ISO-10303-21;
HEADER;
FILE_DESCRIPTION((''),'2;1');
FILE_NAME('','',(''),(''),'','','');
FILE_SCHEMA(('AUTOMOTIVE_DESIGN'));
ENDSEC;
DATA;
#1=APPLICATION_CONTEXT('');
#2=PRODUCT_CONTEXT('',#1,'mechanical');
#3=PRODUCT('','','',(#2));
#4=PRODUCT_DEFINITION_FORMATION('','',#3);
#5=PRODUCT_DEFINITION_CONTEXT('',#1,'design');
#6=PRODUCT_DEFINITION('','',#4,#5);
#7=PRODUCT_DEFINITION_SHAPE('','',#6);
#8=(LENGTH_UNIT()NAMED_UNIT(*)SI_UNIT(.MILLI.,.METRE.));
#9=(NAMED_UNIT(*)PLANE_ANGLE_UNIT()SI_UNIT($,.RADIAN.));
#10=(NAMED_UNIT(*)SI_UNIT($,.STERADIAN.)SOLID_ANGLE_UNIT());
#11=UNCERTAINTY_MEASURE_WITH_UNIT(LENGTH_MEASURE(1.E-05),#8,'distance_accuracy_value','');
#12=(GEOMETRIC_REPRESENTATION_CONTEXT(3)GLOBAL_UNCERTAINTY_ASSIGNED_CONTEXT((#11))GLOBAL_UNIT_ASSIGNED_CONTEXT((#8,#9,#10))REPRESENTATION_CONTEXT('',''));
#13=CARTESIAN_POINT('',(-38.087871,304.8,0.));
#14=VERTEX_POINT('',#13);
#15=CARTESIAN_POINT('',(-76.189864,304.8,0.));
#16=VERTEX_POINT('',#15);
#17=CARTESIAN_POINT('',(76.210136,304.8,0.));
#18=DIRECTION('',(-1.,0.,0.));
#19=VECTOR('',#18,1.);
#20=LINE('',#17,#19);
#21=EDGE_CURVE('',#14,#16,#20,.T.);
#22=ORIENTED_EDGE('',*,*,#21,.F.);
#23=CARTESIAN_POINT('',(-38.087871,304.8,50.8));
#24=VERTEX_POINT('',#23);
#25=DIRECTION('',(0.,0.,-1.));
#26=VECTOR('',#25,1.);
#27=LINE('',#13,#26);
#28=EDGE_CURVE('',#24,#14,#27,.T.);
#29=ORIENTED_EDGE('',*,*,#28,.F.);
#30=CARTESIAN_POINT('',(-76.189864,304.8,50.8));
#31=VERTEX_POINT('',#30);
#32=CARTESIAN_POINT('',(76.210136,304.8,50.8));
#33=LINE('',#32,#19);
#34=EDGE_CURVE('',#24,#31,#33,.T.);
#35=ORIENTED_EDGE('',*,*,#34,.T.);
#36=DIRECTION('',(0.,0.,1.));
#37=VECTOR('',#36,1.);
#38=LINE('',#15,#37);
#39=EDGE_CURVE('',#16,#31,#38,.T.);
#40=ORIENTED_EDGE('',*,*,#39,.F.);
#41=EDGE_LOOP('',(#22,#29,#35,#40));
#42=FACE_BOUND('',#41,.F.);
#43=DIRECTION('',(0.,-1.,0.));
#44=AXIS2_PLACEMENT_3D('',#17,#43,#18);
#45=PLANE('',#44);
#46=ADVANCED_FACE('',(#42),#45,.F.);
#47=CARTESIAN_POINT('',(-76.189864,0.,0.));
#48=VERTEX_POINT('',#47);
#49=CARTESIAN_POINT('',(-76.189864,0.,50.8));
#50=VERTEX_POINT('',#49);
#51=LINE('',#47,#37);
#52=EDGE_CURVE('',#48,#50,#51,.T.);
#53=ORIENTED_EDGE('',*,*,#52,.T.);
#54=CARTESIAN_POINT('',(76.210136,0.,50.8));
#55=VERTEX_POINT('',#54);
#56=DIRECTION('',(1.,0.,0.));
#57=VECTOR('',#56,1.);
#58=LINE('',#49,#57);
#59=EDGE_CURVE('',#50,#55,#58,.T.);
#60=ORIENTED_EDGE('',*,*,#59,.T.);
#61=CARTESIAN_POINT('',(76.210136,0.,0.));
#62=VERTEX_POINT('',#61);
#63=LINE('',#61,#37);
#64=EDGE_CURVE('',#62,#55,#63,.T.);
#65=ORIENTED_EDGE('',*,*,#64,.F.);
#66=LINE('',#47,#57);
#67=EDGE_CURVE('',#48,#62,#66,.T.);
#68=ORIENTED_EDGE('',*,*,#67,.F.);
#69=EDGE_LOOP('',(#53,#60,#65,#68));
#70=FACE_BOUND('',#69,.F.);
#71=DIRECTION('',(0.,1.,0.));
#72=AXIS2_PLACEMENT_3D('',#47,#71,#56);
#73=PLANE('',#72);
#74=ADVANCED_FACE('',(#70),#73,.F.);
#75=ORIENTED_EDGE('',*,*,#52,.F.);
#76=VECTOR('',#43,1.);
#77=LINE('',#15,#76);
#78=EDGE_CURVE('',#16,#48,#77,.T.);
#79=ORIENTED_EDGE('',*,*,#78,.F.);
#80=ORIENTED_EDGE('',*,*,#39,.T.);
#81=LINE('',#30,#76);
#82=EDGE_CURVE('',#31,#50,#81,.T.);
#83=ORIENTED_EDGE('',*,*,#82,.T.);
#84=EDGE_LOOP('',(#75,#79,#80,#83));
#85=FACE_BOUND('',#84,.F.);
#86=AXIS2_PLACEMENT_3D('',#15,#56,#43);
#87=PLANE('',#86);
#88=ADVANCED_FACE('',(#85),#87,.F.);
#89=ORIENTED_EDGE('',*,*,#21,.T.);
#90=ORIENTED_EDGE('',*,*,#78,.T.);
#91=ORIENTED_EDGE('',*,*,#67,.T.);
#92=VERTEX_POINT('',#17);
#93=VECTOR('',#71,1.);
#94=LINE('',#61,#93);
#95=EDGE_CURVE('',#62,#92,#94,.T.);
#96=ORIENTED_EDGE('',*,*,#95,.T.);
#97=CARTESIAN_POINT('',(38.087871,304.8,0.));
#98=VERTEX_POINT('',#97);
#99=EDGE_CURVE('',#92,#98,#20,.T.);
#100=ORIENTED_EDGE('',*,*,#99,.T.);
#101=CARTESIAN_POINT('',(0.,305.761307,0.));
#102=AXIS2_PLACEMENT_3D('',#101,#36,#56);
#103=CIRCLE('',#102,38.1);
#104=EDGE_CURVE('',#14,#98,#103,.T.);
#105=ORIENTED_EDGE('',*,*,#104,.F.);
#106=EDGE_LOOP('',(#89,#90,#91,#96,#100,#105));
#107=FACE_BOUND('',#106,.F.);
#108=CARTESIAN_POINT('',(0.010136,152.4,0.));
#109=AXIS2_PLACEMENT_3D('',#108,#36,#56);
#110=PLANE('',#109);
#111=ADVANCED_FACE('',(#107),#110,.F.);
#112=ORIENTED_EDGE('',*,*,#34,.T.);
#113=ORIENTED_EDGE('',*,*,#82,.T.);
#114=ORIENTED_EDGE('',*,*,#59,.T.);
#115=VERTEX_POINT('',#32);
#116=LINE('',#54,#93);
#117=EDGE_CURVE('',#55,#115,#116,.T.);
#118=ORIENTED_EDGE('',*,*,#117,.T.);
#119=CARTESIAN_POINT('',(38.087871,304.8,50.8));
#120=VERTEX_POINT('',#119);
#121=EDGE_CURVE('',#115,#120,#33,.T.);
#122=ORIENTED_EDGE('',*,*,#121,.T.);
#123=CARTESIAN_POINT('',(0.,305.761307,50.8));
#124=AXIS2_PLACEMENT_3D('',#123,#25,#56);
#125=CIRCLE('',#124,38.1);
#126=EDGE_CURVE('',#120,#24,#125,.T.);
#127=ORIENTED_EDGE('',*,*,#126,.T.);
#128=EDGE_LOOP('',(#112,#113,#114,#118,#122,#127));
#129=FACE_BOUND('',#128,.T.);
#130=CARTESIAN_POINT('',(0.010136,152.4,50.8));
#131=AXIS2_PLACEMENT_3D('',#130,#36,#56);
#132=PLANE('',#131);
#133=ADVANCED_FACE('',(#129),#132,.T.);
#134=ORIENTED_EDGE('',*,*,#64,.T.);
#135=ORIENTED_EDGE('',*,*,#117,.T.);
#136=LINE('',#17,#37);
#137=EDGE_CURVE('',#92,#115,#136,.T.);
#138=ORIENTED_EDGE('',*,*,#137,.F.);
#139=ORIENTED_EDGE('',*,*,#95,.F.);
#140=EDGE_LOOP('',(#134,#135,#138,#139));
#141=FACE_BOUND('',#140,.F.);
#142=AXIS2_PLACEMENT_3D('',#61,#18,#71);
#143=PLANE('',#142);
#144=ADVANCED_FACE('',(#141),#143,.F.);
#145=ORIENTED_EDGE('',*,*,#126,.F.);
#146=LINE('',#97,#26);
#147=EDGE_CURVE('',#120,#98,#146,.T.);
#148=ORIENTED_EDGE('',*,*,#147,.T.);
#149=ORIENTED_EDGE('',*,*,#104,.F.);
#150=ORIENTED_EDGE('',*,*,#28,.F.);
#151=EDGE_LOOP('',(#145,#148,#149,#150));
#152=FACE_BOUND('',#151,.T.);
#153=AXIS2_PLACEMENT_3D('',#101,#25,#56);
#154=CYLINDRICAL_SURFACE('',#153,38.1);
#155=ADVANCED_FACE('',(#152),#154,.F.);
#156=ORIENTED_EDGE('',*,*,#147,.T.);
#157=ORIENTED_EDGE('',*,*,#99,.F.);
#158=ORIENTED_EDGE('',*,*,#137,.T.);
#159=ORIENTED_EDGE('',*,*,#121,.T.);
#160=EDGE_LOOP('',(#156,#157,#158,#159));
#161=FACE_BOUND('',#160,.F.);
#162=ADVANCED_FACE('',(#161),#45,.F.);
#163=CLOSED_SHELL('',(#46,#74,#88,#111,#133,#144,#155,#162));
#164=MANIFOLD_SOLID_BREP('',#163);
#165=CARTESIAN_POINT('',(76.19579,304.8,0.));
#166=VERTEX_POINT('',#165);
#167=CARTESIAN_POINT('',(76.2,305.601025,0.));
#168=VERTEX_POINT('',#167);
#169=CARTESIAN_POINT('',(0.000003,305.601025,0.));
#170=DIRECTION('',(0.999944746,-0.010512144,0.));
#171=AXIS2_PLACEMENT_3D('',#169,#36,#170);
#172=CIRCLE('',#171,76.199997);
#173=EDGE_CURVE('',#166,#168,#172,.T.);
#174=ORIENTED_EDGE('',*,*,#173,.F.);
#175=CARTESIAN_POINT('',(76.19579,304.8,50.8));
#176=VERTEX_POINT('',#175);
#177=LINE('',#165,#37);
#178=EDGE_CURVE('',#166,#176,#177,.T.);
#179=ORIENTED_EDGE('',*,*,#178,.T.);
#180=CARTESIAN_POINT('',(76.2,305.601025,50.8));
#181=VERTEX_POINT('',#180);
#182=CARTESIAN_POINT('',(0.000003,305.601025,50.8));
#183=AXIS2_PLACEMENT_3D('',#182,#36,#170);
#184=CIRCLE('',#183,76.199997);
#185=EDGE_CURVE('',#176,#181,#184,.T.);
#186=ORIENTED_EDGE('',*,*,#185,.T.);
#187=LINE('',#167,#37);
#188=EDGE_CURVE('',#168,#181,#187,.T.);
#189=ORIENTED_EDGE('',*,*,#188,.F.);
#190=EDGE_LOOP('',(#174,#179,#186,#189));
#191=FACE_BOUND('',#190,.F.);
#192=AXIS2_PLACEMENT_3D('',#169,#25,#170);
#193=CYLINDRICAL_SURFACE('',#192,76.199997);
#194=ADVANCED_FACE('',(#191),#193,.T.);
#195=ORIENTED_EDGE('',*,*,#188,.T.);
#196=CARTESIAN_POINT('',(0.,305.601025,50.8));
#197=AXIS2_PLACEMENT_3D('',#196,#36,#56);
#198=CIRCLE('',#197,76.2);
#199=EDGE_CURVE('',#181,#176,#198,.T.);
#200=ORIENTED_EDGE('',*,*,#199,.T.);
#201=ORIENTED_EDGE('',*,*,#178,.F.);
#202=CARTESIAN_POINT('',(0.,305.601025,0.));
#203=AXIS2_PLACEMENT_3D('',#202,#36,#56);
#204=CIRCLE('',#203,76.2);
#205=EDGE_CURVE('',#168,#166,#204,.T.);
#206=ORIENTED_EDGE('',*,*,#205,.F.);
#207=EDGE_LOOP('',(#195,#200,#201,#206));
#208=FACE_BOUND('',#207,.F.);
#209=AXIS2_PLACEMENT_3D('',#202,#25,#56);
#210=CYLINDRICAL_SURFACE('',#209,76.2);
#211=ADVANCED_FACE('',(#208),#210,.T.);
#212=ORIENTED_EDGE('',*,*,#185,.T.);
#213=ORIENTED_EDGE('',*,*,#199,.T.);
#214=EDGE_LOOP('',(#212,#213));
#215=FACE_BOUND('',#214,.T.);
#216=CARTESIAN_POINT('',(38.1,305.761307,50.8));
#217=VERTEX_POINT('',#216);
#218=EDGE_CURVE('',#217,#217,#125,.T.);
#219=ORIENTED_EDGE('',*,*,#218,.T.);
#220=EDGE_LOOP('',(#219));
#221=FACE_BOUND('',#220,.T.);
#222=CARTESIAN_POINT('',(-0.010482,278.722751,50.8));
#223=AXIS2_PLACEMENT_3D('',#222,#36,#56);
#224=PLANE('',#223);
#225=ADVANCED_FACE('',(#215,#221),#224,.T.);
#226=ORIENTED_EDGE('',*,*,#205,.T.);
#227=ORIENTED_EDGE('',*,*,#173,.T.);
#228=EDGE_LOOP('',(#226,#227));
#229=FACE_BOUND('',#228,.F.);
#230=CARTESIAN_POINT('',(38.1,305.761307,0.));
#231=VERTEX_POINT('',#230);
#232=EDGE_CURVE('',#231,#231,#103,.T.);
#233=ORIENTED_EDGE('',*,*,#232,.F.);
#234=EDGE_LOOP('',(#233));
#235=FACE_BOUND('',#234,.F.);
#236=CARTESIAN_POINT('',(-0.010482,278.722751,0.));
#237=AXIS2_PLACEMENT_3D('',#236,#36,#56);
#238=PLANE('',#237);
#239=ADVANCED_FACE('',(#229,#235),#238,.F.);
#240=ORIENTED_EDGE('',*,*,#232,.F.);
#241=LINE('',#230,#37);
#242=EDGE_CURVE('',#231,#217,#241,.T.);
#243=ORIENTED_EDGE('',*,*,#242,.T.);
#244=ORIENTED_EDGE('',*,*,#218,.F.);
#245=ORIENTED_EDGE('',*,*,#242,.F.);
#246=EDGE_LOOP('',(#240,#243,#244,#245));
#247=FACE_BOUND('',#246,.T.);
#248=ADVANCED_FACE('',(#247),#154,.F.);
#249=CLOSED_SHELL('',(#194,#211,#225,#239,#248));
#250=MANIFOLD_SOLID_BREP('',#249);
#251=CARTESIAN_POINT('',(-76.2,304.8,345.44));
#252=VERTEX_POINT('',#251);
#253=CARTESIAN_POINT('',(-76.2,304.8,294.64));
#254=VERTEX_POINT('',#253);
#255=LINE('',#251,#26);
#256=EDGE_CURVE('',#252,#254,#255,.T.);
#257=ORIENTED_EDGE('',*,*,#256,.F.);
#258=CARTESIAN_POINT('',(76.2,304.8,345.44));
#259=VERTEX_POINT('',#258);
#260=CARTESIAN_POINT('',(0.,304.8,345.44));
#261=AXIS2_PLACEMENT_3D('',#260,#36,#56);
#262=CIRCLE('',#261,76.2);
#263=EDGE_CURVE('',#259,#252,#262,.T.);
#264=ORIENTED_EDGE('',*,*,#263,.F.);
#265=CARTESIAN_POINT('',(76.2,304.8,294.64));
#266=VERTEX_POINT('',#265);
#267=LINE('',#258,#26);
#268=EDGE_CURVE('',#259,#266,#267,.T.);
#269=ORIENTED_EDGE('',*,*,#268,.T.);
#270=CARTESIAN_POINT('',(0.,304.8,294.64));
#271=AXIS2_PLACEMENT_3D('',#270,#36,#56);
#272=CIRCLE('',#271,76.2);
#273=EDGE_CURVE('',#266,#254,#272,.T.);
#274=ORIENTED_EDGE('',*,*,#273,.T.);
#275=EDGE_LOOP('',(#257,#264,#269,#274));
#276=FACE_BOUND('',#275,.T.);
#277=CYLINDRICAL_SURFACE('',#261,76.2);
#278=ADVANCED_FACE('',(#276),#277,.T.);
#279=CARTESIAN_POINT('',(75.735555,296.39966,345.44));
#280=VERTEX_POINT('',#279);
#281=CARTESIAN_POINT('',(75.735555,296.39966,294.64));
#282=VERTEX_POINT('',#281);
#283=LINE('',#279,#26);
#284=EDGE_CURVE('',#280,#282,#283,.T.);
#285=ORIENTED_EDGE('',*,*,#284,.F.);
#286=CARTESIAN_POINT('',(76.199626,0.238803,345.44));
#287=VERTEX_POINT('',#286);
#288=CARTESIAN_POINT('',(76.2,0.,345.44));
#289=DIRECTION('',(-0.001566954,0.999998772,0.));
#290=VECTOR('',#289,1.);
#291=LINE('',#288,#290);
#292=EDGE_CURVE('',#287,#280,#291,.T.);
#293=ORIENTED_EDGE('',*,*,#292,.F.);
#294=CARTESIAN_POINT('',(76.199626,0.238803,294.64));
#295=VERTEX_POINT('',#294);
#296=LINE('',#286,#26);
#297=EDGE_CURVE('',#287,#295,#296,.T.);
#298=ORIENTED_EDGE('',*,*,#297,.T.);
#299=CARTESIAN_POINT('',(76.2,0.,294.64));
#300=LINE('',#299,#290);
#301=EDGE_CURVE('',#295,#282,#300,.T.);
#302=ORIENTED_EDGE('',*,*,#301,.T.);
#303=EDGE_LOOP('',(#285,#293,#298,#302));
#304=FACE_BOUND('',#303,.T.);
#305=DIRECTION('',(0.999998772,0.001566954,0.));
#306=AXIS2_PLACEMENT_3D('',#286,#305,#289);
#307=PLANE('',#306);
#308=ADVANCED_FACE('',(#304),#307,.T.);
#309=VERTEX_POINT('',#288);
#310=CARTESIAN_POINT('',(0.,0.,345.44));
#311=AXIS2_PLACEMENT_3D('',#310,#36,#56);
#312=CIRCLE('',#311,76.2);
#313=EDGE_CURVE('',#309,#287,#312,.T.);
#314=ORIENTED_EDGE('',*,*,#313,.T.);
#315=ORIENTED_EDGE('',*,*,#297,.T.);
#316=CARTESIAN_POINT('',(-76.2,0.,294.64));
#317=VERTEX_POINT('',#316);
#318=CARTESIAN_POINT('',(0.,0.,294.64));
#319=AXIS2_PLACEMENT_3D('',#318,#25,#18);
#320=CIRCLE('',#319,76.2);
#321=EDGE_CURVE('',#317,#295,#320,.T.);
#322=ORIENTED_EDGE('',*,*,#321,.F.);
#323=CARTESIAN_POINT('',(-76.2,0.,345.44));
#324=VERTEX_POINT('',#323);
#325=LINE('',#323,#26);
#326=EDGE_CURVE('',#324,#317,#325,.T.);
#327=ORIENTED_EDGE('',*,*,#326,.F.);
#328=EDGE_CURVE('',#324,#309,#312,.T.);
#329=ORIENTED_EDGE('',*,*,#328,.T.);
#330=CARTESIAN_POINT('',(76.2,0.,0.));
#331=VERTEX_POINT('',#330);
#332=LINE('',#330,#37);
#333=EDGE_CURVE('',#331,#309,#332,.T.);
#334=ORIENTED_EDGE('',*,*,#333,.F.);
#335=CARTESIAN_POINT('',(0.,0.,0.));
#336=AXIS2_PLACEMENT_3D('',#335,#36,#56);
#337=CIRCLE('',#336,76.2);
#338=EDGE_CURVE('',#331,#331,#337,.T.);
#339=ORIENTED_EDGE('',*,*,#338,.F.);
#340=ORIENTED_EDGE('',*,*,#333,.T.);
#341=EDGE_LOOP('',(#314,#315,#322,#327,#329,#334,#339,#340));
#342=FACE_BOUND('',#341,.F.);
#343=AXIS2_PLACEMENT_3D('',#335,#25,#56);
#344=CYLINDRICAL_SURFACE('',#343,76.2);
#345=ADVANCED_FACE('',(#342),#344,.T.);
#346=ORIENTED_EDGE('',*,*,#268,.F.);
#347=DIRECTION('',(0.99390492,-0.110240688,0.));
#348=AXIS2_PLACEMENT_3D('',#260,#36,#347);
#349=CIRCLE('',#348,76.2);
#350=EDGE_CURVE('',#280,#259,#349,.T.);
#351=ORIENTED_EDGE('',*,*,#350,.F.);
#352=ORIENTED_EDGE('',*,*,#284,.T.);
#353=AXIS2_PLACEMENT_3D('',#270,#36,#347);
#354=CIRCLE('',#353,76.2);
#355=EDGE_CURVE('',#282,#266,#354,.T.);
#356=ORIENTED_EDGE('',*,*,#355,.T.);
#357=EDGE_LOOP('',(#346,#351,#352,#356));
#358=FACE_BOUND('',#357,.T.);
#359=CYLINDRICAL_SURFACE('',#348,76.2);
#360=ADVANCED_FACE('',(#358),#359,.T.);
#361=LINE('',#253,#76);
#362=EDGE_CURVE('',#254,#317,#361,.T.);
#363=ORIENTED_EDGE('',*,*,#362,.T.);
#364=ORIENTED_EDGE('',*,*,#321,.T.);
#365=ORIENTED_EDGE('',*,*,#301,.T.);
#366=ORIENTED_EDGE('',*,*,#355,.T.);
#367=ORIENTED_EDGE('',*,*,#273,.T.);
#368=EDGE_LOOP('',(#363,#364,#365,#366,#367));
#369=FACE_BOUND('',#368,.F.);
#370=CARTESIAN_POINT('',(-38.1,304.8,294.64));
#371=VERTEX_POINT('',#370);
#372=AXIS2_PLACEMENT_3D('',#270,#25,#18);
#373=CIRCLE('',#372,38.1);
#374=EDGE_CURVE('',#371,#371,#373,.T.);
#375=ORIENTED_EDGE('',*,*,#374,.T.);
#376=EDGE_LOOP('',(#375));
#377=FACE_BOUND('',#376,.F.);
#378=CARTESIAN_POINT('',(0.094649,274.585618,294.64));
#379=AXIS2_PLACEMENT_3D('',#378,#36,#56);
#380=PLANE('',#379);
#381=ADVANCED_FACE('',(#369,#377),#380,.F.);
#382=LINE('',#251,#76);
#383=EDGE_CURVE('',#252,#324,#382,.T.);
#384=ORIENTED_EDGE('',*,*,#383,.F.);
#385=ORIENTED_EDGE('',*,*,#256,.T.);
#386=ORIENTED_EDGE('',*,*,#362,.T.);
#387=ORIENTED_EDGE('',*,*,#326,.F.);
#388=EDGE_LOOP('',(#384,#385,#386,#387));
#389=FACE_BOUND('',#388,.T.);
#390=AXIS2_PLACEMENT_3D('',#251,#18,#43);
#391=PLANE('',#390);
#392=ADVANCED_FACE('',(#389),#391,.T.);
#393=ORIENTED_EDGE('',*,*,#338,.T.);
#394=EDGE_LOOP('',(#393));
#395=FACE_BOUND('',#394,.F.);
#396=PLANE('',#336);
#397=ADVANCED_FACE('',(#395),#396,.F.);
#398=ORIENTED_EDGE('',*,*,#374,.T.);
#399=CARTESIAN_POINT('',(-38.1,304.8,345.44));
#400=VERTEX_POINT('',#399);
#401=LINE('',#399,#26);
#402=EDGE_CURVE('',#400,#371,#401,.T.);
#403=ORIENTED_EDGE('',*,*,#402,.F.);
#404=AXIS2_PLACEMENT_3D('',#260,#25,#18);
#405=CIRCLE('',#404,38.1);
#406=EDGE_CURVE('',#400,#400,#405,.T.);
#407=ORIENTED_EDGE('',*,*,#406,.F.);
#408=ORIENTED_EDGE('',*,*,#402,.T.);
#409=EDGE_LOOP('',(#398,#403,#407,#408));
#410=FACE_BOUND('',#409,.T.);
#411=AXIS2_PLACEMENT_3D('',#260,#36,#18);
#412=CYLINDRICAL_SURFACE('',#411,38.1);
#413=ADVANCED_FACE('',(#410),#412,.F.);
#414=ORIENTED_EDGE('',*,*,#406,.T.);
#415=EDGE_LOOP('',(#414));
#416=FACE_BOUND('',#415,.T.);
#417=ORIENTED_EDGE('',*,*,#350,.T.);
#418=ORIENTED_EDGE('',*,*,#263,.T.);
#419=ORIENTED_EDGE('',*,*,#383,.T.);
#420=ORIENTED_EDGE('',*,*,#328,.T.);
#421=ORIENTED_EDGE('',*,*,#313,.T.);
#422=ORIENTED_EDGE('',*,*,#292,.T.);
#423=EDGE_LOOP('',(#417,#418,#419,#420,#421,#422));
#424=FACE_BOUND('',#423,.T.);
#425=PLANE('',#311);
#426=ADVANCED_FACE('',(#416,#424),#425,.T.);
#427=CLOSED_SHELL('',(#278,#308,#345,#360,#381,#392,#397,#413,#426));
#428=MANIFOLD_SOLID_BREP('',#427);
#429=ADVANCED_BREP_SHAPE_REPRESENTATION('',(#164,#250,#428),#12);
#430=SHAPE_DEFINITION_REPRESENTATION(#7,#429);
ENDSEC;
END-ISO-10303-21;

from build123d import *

# Parameters (mm, degrees)
F0_R     = 76.2
F4_DEPTH = 345.44
F6_DEPTH = 50.8
F7_DEPTH = 50.8
F3_R     = 38.1
F8_DEPTH = 91.44


# Not quite as in the source:
# - ends of sketch curves that miss each other by under 0.0002 mm in the source are joined


with BuildPart() as f4:
    # F0 (on Top) → F4 (new body)
    with BuildSketch(Plane.XY):
        Circle(F0_R)
    extrude(amount=F4_DEPTH)

    # F5 (on face) → F6 (join)
    with BuildSketch(Plane.XY.offset(345.44)):
        with BuildLine():
            ThreePointArc((-76.2, 304.8), (-4.2065849822, 228.7161998663), (75.7355549288, 296.399659553))
            Line((75.7355549288, 296.399659553), (75.7223893169, 304.8))
            Line((75.7223893169, 304.8), (38.1, 304.8))
            ThreePointArc((38.1, 304.8), (0, 266.7), (-38.1, 304.8))
            Line((-38.1, 304.8), (-76.2, 304.8))
        make_face()
        with BuildLine():
            Line((75.7223893169, 304.8), (75.7355549288, 296.399659553))
            ThreePointArc((75.7355549288, 296.399659553), (76.0838001337, 300.5934150178), (76.2, 304.8))
            ThreePointArc((76.2, 304.8), (0, 381), (-76.2, 304.8))
            Line((-76.2, 304.8), (-38.1, 304.8))
            ThreePointArc((-38.1, 304.8), (0, 342.9), (38.1, 304.8))
            Line((38.1, 304.8), (75.7223893169, 304.8))
        make_face()
        with BuildLine():
            ThreePointArc((-76.2, 0), (0, 76.2), (76.2, 0))
            Line((76.2, 0), (75.7355549288, 296.399659553))
            ThreePointArc((75.7355549288, 296.399659553), (-4.2065849822, 228.7161998663), (-76.2, 304.8))
            Line((-76.2, 304.8), (-76.2, 0))
        make_face()
    extrude(amount=-F6_DEPTH)


with BuildPart() as f7:
    # F2 (on face) → F7 (new body)
    with BuildSketch(Plane.XY):
        with BuildLine():
            Line((-76.1898637822, 304.8), (-76.1898637822, 304.3581831019))
            ThreePointArc((-76.1898637822, 304.3581831019), (0.2209283182, 229.401345622), (76.1957896369, 304.8))
            Line((76.1957896369, 304.8), (-76.1898637822, 304.8))
        make_face()
        with BuildLine():
            ThreePointArc((76.1957896369, 304.8), (76.198947402, 305.2005071425), (76.2, 305.6010253502))
            ThreePointArc((76.2, 305.6010253502), (-0.6214417907, 381.7984912536), (-76.1898637822, 304.3581831019))
            Line((-76.1898637822, 304.3581831019), (-76.1898637822, 304.8))
            Line((-76.1898637822, 304.8), (76.1957896369, 304.8))
        make_face()
    extrude(amount=F7_DEPTH)


with BuildPart() as f7b:
    # F1 (on Top) → F7, piece 2 (new body)
    with BuildSketch(Plane.XY):
        Polygon((-76.1898637822, 0), (0, 0), (76.2101362178, 0), (76.2101362178, 304.8), (-76.1898637822, 304.8), align=None)
    extrude(amount=F7_DEPTH)


with BuildPart() as f8_tool:
    # F3 (on face) → F8 (new body)
    with BuildSketch(Plane.XY):
        with Locations((0, 305.761307478)):
            Circle(F3_R)
    extrude(amount=F8_DEPTH)


with BuildPart() as f7_1:
    add(f7.part)

    # F8: cut by f8_tool
    add(f8_tool.part, mode=Mode.SUBTRACT)


with BuildPart() as f7b_1:
    add(f7b.part)

    # F8: cut by f8_tool
    add(f8_tool.part, mode=Mode.SUBTRACT)


solid = Compound([f4.part, f7_1.part, f7b_1.part])
